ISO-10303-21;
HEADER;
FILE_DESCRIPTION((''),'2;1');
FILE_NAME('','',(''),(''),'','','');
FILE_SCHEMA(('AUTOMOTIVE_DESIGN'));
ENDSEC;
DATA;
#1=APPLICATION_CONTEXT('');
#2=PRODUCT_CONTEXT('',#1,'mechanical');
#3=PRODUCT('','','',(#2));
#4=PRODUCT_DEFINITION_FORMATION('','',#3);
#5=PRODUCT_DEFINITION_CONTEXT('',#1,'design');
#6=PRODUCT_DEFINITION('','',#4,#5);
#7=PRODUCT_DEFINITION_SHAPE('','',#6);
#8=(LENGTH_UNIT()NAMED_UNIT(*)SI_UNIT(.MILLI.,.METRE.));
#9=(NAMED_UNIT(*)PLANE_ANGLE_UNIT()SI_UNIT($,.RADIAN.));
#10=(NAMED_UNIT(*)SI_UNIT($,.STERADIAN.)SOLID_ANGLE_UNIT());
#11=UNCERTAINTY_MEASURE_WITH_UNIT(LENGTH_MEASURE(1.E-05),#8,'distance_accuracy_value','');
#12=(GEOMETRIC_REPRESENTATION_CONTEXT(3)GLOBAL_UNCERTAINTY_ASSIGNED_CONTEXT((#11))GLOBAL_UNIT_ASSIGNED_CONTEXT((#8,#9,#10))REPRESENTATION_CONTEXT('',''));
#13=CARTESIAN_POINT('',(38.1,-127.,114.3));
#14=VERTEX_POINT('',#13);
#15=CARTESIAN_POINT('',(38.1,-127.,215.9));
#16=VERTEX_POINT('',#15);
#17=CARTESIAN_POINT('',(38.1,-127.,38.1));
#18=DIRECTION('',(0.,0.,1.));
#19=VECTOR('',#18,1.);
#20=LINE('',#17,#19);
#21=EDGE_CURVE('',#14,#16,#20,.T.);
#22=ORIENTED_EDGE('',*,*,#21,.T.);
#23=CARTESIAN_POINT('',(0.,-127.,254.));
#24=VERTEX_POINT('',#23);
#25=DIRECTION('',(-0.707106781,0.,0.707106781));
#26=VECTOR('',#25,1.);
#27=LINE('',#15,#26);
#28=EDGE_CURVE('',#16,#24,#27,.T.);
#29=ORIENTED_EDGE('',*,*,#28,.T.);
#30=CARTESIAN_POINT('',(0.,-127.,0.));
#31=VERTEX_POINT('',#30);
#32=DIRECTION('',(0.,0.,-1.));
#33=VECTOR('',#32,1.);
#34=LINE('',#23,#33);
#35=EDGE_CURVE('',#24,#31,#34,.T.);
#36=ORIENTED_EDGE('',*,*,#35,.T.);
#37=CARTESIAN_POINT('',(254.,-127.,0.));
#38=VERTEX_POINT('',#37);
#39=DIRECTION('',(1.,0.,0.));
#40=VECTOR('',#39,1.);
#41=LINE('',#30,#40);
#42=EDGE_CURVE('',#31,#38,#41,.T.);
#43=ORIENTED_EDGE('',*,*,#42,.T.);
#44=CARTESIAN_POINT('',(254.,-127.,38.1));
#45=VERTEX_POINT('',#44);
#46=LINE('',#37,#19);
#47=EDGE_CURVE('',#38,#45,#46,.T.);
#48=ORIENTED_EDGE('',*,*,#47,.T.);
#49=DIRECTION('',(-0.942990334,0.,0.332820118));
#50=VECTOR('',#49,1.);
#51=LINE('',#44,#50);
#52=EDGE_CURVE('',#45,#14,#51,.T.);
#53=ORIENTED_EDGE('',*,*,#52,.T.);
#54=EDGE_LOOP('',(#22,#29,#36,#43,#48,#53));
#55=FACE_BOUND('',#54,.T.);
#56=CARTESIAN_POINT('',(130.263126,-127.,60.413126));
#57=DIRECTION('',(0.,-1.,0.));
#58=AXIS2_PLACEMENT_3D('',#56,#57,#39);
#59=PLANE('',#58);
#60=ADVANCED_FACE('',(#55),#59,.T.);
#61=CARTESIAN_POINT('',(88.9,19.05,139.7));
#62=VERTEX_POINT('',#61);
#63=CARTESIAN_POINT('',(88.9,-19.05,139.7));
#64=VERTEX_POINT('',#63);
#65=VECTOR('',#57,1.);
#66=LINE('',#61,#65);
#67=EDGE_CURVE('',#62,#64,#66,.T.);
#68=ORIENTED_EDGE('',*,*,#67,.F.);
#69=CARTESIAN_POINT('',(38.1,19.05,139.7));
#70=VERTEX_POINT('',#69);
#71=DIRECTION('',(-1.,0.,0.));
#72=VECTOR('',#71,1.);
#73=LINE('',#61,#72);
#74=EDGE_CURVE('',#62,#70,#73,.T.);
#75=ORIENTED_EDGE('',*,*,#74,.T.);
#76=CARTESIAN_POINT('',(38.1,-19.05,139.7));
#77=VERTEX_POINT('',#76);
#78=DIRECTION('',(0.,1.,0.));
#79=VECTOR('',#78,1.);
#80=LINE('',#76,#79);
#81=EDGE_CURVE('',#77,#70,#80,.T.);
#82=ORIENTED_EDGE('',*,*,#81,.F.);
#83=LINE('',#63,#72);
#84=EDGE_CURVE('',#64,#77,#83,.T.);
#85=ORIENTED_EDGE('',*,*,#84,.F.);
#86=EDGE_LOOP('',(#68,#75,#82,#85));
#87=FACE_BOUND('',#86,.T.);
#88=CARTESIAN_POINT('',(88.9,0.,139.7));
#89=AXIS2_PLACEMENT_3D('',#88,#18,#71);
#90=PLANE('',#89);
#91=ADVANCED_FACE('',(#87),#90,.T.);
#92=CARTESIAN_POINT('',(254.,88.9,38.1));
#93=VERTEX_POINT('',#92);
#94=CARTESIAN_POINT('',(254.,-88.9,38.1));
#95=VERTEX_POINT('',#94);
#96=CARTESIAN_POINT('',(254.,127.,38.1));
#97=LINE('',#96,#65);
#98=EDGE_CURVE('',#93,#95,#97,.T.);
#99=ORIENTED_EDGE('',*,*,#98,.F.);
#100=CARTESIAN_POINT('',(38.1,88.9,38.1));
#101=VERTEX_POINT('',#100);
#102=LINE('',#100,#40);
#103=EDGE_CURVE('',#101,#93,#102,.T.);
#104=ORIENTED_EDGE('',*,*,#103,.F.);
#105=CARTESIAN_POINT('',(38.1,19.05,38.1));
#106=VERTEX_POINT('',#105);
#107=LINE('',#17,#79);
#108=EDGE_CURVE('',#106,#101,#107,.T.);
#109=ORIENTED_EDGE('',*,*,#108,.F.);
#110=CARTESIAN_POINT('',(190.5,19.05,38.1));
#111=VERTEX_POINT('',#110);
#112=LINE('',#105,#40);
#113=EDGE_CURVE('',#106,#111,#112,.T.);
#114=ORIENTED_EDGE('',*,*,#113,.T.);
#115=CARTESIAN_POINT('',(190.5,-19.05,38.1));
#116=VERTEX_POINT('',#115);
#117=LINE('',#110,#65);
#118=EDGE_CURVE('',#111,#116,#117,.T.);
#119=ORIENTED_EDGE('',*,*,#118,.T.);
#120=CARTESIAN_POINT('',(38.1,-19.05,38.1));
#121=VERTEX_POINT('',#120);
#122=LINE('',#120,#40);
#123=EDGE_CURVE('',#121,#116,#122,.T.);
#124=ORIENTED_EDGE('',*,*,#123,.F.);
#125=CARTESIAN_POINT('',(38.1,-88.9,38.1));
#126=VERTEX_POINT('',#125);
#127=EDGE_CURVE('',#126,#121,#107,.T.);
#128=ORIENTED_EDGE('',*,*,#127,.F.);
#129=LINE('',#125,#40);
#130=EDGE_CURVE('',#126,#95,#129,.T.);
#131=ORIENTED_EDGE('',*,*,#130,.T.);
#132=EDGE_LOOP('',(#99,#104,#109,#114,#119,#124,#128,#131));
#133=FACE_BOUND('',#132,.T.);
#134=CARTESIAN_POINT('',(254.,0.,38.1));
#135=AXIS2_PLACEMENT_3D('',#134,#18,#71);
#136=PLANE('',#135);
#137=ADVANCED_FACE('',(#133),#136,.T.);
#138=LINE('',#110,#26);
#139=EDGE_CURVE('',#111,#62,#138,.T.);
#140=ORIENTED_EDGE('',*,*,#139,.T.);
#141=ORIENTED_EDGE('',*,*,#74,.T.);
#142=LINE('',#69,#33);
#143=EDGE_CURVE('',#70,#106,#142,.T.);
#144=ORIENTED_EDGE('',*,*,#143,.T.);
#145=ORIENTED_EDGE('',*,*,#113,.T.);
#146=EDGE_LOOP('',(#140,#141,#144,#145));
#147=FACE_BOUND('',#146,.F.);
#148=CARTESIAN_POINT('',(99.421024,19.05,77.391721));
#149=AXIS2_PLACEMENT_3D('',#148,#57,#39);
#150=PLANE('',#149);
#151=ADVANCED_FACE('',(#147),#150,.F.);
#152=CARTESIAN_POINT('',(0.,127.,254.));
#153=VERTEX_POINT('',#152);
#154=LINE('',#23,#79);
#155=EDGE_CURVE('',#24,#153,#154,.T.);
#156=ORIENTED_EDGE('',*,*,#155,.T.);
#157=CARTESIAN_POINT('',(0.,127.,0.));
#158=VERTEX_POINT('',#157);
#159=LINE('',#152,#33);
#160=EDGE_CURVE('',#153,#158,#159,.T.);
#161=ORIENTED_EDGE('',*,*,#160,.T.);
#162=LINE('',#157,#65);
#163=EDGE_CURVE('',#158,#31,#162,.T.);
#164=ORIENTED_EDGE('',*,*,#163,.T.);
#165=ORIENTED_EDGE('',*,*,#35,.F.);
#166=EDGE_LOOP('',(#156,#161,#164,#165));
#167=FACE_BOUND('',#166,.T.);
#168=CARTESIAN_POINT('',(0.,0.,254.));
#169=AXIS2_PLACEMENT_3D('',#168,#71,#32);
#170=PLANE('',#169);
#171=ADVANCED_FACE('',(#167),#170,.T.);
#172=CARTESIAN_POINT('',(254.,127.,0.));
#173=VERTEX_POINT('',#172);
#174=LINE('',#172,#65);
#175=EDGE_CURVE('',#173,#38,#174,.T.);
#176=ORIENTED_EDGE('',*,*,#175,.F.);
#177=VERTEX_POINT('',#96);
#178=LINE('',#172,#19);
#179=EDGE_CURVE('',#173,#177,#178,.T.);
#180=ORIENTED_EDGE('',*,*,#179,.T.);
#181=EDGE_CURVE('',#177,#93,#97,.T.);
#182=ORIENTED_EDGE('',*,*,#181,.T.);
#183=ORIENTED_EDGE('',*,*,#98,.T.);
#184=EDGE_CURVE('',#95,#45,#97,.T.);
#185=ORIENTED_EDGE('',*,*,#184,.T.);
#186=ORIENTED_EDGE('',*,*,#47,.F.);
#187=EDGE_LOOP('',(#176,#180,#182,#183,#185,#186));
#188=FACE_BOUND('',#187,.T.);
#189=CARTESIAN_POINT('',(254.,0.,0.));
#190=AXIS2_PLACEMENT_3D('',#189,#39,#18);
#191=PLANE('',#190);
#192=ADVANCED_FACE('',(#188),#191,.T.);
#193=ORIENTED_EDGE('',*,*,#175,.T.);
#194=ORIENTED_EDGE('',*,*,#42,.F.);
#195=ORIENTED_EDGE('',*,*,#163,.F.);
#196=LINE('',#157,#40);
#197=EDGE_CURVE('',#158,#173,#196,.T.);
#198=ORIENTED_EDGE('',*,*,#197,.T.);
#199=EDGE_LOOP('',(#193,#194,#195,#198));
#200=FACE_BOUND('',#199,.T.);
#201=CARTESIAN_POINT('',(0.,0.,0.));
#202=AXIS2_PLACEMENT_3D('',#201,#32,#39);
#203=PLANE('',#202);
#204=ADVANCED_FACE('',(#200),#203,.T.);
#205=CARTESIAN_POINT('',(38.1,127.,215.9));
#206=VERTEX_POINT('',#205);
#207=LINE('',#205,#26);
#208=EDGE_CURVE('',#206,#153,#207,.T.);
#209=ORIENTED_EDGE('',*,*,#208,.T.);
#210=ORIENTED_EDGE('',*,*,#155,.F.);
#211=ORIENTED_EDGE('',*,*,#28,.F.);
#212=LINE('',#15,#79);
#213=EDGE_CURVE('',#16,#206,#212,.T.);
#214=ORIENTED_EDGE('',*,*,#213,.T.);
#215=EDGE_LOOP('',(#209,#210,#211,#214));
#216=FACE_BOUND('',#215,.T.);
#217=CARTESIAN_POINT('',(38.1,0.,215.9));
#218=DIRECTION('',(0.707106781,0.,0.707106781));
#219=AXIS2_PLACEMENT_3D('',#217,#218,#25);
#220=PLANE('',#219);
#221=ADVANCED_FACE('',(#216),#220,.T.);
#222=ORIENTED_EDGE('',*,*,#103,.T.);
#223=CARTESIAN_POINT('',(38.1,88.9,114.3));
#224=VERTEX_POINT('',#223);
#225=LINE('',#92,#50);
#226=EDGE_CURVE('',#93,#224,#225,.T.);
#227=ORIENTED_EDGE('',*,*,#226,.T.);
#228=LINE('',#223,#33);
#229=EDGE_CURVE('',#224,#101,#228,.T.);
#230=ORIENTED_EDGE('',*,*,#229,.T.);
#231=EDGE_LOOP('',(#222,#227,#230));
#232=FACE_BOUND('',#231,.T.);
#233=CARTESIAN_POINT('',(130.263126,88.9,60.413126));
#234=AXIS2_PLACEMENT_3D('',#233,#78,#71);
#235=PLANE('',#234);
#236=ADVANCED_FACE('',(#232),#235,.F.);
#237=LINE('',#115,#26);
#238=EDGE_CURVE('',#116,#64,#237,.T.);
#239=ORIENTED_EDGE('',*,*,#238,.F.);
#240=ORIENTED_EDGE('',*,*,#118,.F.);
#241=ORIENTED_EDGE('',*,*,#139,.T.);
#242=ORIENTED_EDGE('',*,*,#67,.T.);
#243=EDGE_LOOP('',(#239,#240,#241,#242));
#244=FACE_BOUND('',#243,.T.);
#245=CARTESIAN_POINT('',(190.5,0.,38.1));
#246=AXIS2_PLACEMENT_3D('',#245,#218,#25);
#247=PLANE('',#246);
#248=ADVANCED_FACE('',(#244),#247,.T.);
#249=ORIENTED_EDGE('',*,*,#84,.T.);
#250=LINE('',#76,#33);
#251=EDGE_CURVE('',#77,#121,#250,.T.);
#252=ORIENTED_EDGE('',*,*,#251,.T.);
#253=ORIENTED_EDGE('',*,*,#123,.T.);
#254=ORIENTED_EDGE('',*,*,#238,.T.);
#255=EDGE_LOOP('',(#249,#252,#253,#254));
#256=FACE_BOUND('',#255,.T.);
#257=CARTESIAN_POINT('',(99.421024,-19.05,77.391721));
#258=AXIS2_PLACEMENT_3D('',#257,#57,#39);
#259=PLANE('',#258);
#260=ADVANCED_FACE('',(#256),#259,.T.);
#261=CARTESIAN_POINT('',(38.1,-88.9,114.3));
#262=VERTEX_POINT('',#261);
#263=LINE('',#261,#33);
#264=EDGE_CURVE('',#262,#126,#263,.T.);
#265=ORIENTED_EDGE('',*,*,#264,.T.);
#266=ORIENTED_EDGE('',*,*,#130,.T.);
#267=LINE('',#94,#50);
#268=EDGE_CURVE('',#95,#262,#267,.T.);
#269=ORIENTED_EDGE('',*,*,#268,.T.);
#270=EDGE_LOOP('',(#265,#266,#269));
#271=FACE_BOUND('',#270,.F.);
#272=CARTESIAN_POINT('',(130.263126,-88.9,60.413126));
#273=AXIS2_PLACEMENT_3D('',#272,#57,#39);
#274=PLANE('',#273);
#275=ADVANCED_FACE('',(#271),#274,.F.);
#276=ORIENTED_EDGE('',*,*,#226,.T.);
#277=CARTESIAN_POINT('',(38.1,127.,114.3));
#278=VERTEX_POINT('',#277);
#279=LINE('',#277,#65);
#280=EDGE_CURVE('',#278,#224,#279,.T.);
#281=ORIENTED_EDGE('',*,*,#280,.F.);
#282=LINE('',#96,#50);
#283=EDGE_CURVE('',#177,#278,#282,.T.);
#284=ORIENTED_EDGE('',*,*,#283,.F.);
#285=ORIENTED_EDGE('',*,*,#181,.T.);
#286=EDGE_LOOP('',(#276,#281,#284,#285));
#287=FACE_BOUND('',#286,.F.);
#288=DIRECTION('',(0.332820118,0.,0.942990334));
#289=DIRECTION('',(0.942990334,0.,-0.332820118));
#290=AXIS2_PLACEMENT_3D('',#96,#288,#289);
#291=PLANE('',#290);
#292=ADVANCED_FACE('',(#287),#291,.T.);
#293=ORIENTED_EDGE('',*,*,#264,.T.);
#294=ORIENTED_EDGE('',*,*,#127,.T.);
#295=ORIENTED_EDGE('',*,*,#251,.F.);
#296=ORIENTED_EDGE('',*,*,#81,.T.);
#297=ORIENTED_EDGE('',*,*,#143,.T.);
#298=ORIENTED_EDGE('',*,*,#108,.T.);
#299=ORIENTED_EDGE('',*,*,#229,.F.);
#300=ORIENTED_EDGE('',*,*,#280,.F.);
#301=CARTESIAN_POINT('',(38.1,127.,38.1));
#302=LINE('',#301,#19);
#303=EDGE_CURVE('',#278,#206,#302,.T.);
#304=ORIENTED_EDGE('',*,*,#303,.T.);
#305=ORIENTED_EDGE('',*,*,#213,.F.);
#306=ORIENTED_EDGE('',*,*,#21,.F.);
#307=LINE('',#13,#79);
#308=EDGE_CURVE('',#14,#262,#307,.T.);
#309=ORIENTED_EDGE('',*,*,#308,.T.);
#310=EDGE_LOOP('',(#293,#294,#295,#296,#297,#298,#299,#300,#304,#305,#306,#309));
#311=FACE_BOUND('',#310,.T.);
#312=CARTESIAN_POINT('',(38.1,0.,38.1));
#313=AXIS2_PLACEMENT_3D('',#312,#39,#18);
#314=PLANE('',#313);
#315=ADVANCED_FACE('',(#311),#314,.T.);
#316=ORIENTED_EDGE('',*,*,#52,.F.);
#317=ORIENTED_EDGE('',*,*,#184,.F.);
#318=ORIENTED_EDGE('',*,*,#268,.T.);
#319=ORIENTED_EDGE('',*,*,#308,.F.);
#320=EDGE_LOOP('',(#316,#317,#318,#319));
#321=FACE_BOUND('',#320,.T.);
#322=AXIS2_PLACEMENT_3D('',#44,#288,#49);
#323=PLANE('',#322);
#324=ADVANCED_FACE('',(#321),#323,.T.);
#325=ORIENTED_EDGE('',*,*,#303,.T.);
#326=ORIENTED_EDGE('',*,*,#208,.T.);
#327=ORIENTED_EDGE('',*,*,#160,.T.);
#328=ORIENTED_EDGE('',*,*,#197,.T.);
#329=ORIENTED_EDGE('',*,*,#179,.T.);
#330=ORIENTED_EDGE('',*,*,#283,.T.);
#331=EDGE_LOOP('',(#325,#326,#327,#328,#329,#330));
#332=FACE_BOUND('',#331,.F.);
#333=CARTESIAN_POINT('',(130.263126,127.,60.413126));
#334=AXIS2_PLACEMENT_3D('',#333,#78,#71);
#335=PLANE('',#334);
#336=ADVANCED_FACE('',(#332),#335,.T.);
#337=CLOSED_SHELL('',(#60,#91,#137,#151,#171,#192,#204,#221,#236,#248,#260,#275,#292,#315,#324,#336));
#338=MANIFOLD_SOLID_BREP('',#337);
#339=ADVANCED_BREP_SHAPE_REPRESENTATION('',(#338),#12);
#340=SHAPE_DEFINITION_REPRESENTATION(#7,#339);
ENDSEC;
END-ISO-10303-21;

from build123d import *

# Parameters (mm, degrees)
F1_DEPTH = 127
F2_DEPTH = 19.05
F4_DEPTH = 38.1


# Not quite as in the source:
# - a pattern or mirror of a feature is missing from the dataset's text; its kind, count and spacing are read off the source's solid


with BuildPart() as f1:
    # F0 (on Front) → F1 (new body, symmetric)
    with BuildSketch(Plane.XZ):
        Polygon((0, 254), (0, 0), (254, 0), (254, 38.1), (190.5, 38.1), (38.1, 38.1), (38.1, 139.7), (38.1, 215.9), align=None)
    extrude(amount=F1_DEPTH, both=True)

    # F0 (on Front) → F2 (join, symmetric)
    with BuildSketch(Plane.XZ):
        Polygon((38.1, 38.1), (190.5, 38.1), (88.9, 139.7), (38.1, 139.7), align=None)
    extrude(amount=F2_DEPTH, both=True)

    # F3 (on face) → F4 (join)
    with BuildSketch(Plane.XZ.offset(127)):
        Polygon((254, 38.1), (38.1, 114.3), (38.1, 38.1), align=None)
    f4 = extrude(amount=-F4_DEPTH)

    # F4_copies: F4 across plane
    add(f4.mirror(Plane.ZX))


solid = f1.part
